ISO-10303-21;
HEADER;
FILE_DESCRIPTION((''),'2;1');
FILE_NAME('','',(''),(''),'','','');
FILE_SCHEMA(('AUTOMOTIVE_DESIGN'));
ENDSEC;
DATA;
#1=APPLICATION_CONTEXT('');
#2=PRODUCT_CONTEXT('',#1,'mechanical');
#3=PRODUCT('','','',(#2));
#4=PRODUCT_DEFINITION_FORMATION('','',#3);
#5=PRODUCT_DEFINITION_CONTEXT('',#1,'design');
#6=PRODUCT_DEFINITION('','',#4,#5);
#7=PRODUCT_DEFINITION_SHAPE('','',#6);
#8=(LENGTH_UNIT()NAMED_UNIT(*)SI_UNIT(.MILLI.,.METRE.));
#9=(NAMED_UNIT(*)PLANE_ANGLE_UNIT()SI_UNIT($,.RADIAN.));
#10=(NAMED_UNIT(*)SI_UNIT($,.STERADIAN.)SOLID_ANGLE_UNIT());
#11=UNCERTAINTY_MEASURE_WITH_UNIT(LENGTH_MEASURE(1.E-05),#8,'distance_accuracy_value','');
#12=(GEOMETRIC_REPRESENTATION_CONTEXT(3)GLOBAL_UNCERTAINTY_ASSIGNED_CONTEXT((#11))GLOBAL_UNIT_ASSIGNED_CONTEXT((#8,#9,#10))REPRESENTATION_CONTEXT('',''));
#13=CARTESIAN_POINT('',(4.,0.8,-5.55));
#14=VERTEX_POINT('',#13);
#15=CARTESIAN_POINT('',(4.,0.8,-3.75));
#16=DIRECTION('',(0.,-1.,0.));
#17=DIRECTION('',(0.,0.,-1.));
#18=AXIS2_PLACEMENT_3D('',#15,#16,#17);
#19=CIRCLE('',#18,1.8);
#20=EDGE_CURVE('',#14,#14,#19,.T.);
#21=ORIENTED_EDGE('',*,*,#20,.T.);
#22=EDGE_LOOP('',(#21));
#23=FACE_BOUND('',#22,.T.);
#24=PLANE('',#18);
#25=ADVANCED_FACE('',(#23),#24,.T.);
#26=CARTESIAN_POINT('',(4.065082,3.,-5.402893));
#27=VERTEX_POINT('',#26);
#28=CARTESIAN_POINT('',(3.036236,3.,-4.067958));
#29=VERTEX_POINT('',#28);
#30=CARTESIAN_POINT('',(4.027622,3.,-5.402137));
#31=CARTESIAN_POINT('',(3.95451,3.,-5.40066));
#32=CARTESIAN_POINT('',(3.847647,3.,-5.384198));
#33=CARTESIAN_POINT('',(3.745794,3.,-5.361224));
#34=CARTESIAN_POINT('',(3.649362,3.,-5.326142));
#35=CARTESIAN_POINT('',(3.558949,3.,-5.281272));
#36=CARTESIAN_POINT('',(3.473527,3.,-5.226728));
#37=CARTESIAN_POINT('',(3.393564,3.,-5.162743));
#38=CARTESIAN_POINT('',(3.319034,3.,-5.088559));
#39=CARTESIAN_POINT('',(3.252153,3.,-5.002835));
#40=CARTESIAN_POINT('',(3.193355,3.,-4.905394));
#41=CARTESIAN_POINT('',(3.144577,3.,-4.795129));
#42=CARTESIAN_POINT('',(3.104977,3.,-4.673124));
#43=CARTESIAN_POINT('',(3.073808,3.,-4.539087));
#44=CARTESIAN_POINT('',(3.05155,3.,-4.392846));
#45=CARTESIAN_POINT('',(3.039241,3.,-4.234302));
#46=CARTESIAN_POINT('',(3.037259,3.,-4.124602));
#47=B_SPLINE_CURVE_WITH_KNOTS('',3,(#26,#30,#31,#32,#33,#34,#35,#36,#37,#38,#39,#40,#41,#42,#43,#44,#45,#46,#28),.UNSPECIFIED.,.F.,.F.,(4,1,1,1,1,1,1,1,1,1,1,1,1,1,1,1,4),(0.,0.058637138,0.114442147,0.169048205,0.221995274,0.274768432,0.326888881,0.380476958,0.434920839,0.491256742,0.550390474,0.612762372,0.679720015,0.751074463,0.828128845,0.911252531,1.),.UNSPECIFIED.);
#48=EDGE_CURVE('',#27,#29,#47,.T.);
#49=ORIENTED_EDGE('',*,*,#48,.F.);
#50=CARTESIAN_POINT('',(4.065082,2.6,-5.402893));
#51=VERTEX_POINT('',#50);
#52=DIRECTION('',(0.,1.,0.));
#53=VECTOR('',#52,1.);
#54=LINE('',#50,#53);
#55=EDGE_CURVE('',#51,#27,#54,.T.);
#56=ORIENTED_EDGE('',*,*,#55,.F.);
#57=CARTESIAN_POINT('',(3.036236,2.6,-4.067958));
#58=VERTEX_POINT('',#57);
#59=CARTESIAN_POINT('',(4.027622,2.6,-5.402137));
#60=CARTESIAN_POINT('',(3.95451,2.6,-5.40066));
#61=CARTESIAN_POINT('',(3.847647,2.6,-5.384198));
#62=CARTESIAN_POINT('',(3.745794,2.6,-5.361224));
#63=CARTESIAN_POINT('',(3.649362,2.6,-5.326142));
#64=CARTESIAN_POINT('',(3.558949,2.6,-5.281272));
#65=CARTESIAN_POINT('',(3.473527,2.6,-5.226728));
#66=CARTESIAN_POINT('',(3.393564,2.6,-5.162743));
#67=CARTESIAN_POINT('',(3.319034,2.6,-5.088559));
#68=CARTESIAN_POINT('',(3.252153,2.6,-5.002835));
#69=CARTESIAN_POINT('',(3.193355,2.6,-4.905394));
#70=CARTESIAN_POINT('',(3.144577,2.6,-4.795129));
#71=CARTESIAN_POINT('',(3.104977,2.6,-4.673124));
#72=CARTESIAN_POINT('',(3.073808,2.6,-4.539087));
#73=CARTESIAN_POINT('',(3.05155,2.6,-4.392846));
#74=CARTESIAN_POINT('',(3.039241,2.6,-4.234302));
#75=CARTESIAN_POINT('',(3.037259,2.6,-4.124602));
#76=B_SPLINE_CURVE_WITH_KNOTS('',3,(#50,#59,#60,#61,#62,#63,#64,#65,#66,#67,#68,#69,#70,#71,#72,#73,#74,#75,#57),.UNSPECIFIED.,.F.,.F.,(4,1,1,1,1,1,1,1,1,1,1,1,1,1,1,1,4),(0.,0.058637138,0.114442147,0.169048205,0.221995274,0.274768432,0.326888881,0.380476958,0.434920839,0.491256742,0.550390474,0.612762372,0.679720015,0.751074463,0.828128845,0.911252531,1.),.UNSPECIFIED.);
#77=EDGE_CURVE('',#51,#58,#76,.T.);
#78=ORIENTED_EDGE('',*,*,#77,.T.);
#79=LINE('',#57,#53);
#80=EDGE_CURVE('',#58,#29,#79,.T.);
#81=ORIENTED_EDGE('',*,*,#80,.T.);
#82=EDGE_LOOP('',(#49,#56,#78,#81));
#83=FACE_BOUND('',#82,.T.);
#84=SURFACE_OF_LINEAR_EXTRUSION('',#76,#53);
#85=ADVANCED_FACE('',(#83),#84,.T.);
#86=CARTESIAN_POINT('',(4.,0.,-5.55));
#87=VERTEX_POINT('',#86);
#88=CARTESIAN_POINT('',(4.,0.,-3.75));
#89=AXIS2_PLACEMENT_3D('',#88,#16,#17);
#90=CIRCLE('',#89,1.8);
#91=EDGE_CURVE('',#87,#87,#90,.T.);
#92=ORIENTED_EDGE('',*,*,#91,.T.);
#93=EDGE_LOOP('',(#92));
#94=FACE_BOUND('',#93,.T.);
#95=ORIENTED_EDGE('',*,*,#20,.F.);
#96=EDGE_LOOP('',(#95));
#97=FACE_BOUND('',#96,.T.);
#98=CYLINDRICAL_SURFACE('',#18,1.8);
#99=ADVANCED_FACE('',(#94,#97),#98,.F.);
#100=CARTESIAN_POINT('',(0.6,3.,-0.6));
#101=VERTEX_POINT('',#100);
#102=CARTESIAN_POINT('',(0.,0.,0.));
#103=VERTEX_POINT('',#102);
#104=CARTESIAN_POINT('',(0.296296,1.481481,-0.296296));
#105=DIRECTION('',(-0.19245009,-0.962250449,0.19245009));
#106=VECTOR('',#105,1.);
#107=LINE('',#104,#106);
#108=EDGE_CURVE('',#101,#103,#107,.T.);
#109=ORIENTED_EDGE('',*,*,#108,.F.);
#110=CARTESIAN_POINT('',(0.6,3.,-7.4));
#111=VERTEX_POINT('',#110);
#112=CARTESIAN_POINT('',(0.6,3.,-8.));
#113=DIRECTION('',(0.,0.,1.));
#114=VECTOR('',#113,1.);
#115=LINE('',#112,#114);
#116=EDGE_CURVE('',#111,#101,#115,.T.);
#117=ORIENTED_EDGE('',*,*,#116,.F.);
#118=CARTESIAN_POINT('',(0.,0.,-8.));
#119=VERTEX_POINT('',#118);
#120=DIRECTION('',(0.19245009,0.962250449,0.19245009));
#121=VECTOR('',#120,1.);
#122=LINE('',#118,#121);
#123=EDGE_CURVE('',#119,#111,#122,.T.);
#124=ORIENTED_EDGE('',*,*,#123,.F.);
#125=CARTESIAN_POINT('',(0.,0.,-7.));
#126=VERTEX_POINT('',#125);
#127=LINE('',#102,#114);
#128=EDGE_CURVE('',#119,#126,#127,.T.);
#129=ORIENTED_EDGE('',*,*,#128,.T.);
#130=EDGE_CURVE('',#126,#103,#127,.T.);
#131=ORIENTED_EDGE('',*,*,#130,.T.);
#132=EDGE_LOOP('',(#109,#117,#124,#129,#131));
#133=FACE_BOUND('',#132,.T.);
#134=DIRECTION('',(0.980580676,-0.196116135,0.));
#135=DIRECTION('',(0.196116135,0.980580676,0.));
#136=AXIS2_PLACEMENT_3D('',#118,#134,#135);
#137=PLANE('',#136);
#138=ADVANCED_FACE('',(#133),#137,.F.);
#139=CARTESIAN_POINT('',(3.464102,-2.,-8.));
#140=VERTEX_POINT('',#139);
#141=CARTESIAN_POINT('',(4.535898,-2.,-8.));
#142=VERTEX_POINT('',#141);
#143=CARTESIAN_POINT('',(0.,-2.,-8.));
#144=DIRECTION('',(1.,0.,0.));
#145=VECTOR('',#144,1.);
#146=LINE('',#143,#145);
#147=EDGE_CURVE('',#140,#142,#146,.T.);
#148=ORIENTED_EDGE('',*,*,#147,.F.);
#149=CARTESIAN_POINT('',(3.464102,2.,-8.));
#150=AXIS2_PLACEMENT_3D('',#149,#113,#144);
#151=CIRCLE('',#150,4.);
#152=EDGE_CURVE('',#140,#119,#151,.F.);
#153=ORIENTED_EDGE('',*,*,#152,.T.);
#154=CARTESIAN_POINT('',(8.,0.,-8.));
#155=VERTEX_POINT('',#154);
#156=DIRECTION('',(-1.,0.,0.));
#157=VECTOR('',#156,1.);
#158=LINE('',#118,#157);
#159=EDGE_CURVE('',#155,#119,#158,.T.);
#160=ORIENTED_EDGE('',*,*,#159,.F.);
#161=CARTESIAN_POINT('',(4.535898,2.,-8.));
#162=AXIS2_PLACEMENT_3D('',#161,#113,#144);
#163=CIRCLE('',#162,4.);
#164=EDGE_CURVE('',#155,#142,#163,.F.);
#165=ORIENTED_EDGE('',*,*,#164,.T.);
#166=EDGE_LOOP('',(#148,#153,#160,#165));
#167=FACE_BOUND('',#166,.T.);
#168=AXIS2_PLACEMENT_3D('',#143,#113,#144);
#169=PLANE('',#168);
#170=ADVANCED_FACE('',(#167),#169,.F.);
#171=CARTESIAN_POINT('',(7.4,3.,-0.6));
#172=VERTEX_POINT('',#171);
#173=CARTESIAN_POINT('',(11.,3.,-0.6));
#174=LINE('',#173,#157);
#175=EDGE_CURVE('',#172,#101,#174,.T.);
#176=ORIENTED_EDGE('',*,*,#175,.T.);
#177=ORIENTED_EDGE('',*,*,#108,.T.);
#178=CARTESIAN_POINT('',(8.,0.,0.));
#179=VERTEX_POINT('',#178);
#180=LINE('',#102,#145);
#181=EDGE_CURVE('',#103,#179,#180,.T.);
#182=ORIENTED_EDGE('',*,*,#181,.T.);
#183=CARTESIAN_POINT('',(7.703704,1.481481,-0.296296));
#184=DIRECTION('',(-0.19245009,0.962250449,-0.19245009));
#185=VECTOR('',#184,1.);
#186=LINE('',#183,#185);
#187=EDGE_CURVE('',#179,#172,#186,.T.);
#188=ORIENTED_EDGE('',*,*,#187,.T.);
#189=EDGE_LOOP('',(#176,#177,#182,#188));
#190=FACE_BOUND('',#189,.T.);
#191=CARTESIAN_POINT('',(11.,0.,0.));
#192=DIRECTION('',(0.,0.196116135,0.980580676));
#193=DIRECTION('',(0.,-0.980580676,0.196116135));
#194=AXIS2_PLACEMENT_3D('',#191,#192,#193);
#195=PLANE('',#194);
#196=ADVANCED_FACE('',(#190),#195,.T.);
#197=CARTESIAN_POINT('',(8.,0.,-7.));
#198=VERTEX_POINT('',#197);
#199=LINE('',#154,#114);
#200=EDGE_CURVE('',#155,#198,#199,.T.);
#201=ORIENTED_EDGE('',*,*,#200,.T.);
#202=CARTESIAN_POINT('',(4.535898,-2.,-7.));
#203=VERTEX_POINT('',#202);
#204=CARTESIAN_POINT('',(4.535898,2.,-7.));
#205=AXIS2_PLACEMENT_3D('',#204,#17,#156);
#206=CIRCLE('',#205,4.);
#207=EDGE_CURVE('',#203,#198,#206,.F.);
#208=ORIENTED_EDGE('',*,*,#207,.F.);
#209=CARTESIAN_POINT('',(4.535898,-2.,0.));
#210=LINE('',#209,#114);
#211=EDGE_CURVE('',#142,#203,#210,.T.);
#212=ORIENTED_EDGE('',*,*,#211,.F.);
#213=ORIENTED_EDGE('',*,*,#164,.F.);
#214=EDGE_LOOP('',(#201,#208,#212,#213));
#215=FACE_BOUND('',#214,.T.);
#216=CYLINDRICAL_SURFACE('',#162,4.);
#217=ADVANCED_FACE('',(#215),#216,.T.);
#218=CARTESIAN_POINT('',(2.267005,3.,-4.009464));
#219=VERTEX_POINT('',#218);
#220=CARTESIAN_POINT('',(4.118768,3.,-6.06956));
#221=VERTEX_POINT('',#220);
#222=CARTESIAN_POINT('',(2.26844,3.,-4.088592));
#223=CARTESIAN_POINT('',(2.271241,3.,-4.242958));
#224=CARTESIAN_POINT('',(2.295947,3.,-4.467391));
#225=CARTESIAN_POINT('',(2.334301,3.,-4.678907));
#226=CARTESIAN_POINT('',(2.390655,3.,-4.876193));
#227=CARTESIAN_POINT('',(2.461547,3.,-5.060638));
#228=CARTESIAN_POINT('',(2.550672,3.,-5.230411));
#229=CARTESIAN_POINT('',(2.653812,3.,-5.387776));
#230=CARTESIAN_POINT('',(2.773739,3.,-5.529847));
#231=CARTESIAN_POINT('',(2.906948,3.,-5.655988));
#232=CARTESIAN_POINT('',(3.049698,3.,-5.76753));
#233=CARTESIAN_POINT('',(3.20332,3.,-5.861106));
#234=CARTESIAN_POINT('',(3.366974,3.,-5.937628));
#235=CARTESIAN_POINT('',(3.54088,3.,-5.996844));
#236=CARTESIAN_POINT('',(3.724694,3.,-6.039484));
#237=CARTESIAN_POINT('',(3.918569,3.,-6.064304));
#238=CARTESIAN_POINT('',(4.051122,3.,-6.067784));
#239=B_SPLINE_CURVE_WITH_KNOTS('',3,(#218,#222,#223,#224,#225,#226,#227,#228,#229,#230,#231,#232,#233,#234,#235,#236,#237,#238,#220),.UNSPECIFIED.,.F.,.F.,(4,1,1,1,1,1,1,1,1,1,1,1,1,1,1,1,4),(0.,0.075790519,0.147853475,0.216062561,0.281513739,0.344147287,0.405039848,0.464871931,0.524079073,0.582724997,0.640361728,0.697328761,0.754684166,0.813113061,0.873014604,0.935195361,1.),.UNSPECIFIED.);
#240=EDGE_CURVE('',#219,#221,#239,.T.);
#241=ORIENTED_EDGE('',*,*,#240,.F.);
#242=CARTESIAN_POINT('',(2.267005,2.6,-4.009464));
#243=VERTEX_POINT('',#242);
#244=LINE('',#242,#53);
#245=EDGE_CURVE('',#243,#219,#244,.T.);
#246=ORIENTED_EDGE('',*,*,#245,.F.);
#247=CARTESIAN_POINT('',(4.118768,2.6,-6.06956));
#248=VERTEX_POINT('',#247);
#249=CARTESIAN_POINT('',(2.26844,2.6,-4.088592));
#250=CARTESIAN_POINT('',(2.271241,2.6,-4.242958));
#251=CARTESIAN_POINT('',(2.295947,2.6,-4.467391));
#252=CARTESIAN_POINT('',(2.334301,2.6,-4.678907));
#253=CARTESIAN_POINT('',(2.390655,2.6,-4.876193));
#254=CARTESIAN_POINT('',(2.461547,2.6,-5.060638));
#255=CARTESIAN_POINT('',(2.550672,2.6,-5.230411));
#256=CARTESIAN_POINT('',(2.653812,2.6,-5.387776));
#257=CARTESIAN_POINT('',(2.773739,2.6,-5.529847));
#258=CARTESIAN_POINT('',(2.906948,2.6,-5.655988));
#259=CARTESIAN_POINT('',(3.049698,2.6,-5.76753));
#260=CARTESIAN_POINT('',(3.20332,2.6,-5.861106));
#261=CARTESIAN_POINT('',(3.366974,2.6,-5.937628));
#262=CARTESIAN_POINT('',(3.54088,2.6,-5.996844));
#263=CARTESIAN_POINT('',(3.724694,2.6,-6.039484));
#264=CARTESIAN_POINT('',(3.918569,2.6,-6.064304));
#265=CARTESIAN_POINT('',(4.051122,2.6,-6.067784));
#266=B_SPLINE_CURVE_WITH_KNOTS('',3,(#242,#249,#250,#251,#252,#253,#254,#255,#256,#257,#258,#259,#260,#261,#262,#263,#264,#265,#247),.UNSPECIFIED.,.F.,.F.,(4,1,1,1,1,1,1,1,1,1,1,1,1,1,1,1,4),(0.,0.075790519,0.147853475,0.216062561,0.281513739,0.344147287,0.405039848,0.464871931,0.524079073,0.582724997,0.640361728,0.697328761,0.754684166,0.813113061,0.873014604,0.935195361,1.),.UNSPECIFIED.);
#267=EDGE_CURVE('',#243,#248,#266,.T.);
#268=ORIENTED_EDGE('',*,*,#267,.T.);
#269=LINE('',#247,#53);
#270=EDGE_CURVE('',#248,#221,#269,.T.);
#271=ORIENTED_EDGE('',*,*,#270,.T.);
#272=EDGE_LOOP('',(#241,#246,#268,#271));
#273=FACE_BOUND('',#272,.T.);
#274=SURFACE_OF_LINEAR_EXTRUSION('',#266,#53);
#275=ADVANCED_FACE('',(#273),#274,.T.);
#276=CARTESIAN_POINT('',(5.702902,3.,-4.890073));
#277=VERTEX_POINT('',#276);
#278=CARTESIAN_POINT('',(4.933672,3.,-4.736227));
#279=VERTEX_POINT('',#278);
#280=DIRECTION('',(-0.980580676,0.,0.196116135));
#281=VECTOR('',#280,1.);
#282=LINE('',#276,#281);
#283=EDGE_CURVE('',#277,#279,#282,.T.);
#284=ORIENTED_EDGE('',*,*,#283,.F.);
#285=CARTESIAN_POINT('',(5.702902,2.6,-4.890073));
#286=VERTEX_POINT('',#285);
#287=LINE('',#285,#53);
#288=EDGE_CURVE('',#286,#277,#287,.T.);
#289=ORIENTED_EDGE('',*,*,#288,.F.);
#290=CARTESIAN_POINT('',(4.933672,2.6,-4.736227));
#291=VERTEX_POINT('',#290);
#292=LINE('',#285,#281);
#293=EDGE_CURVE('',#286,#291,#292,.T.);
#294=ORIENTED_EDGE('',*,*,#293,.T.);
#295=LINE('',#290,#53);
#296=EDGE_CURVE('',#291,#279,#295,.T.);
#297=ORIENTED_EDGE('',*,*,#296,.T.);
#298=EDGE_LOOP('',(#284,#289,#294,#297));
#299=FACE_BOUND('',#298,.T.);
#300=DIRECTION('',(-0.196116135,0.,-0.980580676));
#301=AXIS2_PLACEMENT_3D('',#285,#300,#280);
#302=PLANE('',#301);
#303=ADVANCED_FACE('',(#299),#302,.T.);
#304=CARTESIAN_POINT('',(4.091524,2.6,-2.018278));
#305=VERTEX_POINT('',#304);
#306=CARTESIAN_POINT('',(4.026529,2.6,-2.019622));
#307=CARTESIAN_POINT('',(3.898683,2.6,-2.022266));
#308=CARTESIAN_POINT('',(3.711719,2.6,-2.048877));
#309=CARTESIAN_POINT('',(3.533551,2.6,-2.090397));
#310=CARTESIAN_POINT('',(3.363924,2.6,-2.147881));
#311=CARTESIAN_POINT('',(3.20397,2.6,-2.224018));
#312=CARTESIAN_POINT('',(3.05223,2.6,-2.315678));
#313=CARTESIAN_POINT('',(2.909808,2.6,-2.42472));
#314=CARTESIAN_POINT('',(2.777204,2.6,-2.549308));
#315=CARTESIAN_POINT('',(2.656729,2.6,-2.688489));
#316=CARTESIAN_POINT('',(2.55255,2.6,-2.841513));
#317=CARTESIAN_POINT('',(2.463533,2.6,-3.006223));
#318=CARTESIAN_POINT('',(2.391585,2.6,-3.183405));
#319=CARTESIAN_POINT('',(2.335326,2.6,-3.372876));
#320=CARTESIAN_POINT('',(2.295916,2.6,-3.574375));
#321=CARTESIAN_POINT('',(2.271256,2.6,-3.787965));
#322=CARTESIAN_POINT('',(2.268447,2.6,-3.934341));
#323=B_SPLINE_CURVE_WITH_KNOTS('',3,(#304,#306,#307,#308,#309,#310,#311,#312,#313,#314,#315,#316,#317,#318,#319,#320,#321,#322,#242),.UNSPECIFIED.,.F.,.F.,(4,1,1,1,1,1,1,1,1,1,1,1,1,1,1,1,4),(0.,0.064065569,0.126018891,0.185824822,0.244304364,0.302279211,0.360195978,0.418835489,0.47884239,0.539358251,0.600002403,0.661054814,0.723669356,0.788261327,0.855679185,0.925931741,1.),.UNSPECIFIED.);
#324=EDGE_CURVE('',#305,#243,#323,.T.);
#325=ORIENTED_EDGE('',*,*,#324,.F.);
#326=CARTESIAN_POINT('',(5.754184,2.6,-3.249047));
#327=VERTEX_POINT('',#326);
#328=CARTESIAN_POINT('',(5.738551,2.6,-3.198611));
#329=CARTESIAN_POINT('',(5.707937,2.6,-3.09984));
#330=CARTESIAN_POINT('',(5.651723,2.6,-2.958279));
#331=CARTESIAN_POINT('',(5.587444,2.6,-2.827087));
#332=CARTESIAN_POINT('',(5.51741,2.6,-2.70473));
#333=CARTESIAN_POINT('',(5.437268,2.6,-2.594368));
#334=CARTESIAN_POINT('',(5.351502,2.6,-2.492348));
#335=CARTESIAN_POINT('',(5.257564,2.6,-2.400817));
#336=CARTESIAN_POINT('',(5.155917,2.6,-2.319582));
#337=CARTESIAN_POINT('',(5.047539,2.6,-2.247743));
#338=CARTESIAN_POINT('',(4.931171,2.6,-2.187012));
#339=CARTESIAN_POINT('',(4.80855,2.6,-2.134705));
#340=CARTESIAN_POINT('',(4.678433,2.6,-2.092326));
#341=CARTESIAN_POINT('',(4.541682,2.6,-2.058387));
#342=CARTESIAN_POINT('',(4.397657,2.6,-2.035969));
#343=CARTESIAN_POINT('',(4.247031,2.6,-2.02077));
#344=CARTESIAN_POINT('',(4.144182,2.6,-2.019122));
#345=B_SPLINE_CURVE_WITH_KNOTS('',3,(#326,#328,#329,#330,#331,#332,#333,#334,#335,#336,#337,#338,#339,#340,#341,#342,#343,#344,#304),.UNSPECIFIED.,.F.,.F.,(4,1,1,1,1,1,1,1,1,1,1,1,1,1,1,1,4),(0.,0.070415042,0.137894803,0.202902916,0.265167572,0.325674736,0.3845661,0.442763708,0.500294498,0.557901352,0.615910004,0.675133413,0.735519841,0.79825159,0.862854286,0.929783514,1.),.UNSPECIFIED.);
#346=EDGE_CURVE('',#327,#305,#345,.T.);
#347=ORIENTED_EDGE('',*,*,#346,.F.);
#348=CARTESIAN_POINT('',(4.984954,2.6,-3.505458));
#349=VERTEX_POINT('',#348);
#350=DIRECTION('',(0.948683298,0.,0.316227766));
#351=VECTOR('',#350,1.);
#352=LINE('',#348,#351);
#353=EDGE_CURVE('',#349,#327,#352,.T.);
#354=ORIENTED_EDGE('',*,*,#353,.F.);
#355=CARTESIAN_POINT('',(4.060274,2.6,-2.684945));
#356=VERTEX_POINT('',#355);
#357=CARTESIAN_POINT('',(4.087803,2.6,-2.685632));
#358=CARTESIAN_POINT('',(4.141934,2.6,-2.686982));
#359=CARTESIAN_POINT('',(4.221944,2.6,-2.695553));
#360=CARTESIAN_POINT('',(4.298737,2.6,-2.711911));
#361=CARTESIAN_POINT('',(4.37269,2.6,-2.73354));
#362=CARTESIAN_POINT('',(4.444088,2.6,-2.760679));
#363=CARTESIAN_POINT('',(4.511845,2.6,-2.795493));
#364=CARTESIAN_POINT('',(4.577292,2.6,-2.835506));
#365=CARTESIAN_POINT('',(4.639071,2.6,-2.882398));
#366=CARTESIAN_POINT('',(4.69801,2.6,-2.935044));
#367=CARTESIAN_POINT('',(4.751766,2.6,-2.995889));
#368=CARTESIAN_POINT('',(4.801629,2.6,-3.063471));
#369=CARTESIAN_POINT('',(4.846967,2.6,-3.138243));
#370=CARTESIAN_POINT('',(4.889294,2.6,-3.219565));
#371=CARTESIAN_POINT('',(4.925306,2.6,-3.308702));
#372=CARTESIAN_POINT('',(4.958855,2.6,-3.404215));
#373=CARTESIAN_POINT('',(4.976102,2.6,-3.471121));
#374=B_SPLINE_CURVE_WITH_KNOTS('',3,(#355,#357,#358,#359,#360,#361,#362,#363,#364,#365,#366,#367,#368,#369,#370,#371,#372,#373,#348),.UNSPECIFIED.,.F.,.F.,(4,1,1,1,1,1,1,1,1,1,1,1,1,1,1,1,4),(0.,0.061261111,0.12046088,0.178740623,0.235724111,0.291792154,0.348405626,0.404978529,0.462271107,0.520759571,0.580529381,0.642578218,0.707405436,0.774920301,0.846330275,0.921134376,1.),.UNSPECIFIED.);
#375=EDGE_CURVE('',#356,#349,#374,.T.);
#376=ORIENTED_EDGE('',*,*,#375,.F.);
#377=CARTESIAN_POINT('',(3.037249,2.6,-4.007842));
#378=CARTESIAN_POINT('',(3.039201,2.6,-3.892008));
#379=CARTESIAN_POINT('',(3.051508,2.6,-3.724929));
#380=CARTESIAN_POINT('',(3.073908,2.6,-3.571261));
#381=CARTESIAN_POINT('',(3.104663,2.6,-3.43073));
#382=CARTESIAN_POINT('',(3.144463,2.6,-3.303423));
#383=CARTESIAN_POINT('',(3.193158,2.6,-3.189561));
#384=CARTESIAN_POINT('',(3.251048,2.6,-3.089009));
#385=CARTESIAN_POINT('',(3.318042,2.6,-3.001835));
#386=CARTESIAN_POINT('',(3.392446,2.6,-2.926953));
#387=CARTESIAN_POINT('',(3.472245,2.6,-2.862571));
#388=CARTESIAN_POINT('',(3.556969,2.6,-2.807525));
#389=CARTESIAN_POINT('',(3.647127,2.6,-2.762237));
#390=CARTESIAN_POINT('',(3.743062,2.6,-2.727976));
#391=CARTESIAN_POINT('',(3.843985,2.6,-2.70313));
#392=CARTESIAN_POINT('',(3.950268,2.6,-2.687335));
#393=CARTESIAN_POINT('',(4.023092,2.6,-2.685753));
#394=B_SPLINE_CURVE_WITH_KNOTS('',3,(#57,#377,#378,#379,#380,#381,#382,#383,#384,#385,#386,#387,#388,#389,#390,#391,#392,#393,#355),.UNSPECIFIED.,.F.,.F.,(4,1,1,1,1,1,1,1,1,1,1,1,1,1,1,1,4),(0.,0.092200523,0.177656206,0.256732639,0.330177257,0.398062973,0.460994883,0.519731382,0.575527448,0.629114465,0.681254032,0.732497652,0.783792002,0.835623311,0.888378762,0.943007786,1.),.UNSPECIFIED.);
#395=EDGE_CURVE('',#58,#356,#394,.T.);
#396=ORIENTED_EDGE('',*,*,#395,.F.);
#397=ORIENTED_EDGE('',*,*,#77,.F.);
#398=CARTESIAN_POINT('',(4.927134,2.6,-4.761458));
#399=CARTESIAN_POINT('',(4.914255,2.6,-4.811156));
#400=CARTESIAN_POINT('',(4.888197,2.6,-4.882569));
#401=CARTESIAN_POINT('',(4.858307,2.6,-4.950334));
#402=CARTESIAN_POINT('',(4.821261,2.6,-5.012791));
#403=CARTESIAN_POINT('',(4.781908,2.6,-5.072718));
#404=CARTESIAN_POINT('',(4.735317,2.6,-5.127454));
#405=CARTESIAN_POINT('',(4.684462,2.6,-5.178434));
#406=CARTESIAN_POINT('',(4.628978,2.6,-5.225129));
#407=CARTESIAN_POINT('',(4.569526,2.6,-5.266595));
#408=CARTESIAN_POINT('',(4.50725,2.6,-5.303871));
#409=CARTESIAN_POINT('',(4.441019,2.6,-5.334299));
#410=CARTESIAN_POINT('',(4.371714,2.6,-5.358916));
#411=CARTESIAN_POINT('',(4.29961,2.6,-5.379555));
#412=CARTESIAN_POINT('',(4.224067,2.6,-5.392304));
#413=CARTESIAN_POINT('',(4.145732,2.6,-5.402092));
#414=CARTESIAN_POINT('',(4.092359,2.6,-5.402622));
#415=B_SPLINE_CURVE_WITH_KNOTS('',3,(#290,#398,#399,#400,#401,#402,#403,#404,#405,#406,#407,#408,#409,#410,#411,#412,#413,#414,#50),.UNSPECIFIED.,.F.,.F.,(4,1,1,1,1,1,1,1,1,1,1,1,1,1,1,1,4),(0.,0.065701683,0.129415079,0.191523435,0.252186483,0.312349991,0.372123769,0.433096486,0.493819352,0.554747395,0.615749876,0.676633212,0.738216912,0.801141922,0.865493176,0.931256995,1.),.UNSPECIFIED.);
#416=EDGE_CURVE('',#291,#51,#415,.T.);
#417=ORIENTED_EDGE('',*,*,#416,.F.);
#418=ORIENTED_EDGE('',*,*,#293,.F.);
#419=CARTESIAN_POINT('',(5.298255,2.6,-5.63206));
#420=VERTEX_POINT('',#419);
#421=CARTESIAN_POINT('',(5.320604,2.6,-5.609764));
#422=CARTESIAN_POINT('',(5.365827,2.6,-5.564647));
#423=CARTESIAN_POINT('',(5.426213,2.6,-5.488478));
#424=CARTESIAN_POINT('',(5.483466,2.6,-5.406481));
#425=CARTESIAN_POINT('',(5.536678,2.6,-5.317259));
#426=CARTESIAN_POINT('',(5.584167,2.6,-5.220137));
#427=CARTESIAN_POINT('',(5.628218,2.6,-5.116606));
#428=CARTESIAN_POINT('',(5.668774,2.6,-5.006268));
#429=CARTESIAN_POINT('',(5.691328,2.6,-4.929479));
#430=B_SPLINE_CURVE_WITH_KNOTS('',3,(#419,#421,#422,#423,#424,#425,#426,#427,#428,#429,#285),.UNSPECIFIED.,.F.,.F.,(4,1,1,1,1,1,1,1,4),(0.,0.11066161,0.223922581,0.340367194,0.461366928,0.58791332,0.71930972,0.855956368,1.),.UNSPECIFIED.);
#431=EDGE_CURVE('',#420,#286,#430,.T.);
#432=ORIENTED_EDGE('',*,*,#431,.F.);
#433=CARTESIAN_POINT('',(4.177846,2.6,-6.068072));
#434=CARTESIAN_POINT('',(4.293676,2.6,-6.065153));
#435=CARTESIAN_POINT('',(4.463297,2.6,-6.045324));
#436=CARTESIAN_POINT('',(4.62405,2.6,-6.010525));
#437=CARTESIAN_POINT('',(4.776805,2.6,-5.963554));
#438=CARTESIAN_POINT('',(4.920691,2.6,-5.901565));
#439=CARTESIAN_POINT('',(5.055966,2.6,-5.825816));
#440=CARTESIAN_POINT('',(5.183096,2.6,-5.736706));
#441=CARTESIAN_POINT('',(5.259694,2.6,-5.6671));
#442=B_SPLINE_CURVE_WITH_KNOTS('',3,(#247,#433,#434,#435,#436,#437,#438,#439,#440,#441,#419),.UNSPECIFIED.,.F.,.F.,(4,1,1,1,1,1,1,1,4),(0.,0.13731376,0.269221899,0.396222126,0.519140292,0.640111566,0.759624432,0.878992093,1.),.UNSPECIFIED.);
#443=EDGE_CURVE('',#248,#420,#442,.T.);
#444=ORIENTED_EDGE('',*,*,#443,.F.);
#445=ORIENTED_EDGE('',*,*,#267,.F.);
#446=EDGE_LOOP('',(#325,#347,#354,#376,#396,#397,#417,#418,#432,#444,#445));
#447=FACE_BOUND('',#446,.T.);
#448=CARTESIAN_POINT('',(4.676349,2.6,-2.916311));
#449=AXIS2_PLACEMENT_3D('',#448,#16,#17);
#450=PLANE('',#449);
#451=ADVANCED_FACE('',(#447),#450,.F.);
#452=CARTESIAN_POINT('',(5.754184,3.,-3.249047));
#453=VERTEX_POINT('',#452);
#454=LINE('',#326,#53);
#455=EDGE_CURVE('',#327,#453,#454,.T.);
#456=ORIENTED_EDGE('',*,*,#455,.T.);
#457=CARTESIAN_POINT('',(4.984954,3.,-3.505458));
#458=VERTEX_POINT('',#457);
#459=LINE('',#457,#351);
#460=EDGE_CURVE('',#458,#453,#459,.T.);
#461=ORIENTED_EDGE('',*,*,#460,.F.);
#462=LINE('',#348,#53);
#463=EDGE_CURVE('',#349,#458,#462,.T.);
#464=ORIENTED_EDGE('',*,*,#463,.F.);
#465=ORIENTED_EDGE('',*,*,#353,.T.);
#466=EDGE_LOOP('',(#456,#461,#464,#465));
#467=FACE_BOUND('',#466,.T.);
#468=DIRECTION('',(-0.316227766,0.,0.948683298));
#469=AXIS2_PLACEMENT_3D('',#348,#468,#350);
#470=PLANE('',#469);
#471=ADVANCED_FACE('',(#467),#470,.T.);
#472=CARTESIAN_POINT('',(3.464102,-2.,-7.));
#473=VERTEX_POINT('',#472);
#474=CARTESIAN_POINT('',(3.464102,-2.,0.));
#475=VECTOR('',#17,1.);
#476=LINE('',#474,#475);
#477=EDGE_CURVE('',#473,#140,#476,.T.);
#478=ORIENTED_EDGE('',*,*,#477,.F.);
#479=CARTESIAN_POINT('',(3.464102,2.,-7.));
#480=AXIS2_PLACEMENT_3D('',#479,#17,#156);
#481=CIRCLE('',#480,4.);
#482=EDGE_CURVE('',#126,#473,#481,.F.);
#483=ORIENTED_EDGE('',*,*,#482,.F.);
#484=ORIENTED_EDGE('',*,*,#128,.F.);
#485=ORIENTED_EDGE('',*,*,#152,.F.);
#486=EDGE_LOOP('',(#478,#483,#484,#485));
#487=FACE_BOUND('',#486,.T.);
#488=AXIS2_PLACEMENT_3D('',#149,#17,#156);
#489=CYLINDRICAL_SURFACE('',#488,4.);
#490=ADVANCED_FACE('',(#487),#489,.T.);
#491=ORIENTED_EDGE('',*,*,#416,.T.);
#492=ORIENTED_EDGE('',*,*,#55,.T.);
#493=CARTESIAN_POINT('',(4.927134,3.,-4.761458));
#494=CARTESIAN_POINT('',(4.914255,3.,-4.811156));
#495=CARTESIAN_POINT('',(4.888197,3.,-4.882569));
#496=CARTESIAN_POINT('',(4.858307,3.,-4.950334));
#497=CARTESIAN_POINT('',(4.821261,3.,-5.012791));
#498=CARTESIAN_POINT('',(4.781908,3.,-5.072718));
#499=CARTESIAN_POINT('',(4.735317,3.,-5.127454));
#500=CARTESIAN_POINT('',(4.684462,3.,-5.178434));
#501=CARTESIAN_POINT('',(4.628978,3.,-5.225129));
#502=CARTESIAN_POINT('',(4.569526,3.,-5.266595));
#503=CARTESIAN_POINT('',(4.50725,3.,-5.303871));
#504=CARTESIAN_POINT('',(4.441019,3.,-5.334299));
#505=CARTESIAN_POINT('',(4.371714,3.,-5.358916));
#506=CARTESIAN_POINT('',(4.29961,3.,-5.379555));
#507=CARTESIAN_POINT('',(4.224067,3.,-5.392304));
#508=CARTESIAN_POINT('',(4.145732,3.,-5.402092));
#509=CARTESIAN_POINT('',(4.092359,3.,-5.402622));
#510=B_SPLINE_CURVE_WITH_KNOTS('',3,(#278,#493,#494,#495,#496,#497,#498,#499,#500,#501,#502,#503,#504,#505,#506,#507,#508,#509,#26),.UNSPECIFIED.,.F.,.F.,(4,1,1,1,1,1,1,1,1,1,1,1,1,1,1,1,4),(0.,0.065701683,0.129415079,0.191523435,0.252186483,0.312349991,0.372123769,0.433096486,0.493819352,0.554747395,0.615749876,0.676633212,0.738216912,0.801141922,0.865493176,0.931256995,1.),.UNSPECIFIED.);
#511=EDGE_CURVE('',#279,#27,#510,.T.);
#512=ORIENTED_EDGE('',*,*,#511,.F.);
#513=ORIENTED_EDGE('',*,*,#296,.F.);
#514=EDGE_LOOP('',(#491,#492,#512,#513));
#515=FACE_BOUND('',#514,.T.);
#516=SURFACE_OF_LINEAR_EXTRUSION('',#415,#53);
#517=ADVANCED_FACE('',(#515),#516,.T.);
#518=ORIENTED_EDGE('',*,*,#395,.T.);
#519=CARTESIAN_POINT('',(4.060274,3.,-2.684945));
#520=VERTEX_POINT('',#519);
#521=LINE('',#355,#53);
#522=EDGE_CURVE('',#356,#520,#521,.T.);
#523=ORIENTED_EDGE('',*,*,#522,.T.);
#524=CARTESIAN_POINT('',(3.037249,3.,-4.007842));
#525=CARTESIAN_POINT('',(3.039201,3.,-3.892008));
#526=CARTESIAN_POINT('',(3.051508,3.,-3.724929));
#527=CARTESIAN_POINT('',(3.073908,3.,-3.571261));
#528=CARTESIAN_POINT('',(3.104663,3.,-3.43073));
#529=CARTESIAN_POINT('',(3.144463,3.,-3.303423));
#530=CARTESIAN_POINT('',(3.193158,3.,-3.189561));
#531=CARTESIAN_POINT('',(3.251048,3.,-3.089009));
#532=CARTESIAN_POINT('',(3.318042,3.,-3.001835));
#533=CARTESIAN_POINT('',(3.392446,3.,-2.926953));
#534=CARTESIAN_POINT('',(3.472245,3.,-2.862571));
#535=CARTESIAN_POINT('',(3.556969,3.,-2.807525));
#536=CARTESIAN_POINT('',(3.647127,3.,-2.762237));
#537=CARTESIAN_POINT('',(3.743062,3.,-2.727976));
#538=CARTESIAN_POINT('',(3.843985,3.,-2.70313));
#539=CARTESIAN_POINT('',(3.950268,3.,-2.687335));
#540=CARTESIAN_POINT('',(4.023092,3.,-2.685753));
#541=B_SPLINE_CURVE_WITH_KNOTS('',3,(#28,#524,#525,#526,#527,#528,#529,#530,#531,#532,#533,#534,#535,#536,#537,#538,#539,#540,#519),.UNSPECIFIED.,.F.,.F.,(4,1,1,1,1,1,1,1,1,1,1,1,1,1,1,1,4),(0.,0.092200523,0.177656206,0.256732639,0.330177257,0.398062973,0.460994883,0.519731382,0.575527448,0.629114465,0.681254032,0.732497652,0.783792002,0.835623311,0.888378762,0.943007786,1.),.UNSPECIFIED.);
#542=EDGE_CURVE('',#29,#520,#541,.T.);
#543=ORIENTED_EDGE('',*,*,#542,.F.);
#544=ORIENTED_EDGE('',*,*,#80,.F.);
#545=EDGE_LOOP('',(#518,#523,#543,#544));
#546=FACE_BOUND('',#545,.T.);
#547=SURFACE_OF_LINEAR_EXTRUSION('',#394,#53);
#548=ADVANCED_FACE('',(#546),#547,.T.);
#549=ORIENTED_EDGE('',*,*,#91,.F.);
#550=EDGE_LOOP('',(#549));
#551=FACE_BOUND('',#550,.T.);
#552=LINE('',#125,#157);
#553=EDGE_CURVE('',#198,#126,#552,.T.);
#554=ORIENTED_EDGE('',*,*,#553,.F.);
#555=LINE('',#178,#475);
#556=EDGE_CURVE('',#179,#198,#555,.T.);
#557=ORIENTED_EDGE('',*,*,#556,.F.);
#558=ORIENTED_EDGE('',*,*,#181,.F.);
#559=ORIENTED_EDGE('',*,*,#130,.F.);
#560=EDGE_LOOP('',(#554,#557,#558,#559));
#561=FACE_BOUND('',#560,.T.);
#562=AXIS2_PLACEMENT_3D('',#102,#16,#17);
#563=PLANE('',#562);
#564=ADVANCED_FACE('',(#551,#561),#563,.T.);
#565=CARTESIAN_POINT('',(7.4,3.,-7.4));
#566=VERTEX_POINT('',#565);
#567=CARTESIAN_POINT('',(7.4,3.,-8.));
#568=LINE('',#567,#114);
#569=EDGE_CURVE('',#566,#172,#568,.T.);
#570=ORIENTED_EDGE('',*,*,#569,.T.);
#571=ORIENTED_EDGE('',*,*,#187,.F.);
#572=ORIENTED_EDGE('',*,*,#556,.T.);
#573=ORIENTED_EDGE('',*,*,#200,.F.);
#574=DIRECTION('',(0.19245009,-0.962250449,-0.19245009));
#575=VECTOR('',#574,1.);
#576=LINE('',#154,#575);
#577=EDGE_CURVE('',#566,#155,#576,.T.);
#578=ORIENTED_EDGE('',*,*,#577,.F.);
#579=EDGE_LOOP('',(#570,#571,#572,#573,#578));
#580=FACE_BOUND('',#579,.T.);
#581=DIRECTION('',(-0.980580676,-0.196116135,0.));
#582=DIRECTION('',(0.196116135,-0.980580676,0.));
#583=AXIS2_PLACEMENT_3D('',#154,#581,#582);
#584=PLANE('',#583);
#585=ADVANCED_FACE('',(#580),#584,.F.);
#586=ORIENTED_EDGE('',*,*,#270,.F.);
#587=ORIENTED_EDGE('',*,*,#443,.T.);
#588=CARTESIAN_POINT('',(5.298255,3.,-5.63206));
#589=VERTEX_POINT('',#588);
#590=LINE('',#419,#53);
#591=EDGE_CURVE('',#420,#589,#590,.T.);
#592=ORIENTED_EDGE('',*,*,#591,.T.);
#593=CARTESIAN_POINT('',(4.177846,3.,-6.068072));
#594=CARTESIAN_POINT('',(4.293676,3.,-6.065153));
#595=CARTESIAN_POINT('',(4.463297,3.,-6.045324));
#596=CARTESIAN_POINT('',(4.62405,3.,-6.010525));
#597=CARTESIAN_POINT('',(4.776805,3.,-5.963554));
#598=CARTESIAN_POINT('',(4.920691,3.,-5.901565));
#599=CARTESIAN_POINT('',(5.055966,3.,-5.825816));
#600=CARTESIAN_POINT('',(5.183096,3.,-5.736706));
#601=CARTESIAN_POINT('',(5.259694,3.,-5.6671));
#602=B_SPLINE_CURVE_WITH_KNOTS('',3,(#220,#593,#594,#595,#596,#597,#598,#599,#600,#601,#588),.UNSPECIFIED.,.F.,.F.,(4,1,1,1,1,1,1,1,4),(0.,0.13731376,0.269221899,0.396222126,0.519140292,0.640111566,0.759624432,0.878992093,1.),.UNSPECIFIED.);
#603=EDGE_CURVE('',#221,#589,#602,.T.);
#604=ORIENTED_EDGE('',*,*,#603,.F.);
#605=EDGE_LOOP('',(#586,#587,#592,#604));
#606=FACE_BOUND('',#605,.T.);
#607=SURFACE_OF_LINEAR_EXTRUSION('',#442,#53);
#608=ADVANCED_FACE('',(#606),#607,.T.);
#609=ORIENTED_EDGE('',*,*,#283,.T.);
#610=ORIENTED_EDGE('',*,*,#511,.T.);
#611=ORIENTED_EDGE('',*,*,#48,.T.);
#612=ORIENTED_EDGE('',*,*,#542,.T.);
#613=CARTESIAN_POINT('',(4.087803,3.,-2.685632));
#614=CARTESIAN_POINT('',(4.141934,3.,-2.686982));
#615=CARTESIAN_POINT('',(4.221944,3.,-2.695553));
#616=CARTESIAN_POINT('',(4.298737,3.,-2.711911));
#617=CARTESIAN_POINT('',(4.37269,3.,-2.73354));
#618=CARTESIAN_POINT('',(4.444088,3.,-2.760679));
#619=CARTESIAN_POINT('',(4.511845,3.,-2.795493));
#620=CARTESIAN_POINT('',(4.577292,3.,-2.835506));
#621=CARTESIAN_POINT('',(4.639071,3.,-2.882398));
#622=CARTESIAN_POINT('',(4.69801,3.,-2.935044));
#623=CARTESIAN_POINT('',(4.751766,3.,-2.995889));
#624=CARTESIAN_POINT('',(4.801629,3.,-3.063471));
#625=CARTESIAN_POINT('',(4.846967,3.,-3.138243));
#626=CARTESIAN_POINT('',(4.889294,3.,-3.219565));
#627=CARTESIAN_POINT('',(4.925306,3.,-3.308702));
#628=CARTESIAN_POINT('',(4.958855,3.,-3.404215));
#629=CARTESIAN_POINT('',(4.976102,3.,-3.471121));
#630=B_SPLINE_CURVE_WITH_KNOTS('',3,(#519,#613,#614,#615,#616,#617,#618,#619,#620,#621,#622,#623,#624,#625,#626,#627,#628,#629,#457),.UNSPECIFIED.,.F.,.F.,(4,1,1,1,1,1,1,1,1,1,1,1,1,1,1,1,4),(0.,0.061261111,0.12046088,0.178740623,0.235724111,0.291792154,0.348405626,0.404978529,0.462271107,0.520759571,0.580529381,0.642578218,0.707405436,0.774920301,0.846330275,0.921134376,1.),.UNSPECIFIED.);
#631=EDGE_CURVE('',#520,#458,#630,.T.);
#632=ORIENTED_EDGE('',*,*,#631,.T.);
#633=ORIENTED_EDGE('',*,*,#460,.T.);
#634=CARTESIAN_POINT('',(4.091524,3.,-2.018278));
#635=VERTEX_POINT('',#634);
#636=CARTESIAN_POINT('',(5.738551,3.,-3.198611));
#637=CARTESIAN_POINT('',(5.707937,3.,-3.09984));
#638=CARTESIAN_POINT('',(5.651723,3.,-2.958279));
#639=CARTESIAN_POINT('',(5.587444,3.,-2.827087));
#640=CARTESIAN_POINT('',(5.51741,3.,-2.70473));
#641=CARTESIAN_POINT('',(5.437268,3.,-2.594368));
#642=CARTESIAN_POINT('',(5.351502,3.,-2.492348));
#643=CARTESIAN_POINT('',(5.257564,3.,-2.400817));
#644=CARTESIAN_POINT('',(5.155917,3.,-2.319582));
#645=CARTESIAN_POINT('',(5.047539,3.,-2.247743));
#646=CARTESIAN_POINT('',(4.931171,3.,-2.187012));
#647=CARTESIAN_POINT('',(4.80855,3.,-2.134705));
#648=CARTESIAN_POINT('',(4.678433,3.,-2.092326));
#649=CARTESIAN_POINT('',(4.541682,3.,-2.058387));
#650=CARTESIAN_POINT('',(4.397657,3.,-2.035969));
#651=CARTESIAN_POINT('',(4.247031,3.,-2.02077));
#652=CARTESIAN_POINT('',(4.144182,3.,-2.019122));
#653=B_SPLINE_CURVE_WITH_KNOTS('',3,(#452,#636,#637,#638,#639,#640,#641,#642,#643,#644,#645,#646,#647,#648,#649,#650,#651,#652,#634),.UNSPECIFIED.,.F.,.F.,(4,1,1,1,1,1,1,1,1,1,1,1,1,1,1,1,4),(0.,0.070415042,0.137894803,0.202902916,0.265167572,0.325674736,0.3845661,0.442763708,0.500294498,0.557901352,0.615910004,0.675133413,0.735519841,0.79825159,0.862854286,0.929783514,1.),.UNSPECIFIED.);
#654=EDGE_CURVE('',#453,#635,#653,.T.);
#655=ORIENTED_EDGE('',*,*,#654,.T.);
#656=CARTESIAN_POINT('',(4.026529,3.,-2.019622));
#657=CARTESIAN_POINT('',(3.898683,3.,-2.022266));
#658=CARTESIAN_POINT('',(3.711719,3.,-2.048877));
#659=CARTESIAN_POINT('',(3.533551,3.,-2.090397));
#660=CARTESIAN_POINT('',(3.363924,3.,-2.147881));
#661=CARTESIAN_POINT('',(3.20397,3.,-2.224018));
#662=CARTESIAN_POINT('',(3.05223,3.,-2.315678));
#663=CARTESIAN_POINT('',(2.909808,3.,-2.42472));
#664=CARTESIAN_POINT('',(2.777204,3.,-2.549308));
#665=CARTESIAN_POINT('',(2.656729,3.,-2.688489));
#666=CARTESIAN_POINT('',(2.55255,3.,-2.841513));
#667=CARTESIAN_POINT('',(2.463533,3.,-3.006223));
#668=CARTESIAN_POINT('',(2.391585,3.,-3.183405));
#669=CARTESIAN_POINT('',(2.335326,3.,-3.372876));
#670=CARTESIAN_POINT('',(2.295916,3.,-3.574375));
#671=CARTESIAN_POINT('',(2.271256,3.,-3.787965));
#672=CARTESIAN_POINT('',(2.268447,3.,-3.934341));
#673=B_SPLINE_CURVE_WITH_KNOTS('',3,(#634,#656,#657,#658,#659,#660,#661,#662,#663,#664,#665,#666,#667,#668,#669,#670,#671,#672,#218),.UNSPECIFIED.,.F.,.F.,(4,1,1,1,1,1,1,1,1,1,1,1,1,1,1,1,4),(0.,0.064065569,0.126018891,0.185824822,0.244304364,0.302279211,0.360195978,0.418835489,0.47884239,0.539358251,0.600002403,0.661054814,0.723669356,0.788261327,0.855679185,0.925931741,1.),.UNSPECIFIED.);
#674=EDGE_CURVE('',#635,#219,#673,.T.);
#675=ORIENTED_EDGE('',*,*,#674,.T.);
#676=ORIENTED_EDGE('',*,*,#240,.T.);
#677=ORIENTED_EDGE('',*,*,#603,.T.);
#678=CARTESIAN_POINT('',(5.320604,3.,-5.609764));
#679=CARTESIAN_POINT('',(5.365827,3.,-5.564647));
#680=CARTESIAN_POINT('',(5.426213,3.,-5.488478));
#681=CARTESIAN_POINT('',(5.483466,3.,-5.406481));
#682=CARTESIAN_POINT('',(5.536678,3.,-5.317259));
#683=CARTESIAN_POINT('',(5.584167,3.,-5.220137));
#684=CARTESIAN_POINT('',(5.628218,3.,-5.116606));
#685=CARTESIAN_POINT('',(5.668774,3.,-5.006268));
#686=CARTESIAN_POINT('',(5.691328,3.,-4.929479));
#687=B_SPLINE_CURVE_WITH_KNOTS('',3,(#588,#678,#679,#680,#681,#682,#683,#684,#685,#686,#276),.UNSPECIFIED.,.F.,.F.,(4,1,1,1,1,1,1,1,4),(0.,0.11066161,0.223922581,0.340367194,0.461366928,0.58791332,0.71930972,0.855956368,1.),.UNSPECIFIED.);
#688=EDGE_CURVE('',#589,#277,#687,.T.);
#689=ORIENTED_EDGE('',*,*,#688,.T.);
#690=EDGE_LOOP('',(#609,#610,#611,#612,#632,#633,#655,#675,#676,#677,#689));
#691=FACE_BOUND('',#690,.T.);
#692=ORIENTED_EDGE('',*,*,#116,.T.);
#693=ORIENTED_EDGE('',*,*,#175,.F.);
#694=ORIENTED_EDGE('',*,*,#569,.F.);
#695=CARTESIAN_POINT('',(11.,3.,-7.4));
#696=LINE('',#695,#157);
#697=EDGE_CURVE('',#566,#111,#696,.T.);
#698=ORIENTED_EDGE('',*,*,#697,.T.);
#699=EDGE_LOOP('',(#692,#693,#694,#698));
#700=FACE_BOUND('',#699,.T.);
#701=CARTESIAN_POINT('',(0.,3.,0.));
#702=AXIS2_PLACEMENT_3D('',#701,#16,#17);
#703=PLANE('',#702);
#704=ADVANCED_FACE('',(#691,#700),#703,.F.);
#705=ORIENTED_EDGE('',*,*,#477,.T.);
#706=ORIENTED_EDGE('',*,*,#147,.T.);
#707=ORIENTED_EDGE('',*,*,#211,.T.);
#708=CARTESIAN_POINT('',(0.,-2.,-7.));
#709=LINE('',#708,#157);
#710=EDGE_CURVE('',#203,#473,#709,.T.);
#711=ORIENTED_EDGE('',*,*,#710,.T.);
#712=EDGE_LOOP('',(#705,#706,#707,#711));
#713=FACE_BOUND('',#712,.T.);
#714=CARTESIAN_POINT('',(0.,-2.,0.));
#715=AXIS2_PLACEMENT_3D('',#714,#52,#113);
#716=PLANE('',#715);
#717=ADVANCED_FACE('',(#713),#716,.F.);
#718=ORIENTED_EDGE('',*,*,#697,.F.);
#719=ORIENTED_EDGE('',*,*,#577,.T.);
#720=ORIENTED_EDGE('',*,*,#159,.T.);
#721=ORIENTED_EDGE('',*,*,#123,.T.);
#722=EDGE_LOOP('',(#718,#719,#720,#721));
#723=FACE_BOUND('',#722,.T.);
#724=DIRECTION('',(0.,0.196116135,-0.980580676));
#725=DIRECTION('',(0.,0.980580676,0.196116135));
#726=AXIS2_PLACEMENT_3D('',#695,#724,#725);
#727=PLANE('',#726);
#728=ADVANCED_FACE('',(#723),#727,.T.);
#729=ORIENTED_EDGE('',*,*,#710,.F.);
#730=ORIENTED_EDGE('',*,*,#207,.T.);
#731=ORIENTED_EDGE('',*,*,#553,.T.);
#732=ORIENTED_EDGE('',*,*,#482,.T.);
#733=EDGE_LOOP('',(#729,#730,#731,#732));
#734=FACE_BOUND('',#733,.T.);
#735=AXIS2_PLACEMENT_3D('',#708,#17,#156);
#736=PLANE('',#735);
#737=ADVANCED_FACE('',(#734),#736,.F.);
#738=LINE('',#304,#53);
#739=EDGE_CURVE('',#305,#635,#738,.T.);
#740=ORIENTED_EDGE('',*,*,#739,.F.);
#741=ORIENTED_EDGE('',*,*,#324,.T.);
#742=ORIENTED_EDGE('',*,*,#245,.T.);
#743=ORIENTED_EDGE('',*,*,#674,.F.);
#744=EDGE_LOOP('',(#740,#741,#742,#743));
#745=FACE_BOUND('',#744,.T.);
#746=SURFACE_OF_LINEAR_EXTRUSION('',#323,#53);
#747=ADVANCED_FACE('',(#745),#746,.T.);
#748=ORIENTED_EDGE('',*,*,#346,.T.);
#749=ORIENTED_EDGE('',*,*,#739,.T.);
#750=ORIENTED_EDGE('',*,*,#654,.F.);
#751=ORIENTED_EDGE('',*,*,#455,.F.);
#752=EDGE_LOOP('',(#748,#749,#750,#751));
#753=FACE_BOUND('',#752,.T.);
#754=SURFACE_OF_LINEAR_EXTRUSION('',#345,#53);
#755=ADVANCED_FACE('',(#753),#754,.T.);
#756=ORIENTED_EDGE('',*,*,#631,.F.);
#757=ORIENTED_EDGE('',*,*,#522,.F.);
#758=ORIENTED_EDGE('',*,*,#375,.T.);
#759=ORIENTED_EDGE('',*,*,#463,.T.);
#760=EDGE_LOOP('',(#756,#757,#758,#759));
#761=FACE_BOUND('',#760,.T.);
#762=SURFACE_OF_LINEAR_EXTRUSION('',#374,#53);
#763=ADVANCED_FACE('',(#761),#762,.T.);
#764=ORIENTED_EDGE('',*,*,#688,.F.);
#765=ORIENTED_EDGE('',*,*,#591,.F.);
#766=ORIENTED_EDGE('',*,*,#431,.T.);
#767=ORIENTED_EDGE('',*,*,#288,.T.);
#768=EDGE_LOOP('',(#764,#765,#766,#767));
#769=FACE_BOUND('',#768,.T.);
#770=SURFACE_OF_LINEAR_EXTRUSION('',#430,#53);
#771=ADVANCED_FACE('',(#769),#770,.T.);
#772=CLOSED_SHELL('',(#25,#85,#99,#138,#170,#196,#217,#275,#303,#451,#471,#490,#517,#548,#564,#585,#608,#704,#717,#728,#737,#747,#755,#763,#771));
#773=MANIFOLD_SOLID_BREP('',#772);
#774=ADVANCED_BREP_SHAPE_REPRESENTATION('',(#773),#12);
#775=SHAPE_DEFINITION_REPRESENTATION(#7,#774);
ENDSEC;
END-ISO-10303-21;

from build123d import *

# Parameters (mm, degrees)
SKETCH1_W               = 8
SKETCH1_H               = 8
BOSS_EXTRUDE1_DEPTH     = 3
CUT_EXTRUDE1_DEPTH      = 12.704699911
CUT_EXTRUDE1_DEPTH_BACK = 12.704699911
CUT_EXTRUDE2_DEPTH      = 11
SKETCH4_R               = 1.8
CUT_EXTRUDE3_DEPTH      = 0.8
SKETCH5_W               = 8
SKETCH5_H               = 1
BOSS_EXTRUDE2_DEPTH     = 2
FILLET1_R               = 4
CUT_EXTRUDE4_DEPTH      = 0.4


with BuildPart() as part:
    # Sketch1 → Boss-Extrude1 (new body)
    with BuildSketch(Plane(origin=(0, 0, 0), x_dir=(1, 0, 0), z_dir=(0, 1, 0))):
        with Locations((4, 4)):
            Rectangle(SKETCH1_W, SKETCH1_H)
    extrude(amount=BOSS_EXTRUDE1_DEPTH)

    # Sketch2 → Cut-Extrude1 (cut, two sides: drawn at the far end of the back side and taken through both)
    with BuildSketch(Plane.XY.offset(-CUT_EXTRUDE1_DEPTH_BACK)):
        Polygon((0, 0), (0.6, 3), (0, 3), align=None)
        Polygon((8, 0), (7.4, 3), (8, 3), align=None)
    extrude(amount=CUT_EXTRUDE1_DEPTH + CUT_EXTRUDE1_DEPTH_BACK, mode=Mode.SUBTRACT)

    # Sketch3 → Cut-Extrude2 (cut)
    with BuildSketch(Plane(origin=(0, 0, 0), x_dir=(0, 0, -1), z_dir=(1, 0, 0))):
        Polygon((0, 0), (0.6, 3), (0, 3), align=None)
        Polygon((8, 3), (7.4, 3), (8, 0), align=None)
    extrude(amount=CUT_EXTRUDE2_DEPTH, mode=Mode.SUBTRACT)

    # Sketch4 → Cut-Extrude3 (cut)
    with BuildSketch(Plane.XZ):
        with Locations(Location((4, -3.75, 0), (0, 0, 270))):
            Circle(SKETCH4_R)
    extrude(amount=-CUT_EXTRUDE3_DEPTH, mode=Mode.SUBTRACT)

    # Sketch5 → Boss-Extrude2 (add)
    with BuildSketch(Plane.XZ):
        with Locations((4, -7.5)):
            Rectangle(SKETCH5_W, SKETCH5_H)
    extrude(amount=BOSS_EXTRUDE2_DEPTH)

    # Fillet1
    # the kernel refuses this fillet: 4 mm, written as the material it takes off along each edge
    with BuildSketch(Plane(origin=(8, -2, -16.660254038), x_dir=(0, 1, 0), z_dir=(0, 0, 1)), Plane(origin=(0, -2, 1.660254038), x_dir=(0, 1, 0), z_dir=(0, 0, -1))) as fillet1_piece_1:
        with BuildLine():
            CenterArc((4, 3.464101615), FILLET1_R, 180, 60)
            Line((0, 3.464101615), (-0.08, 3.464101615))
            Line((-0.08, 3.464101615), (-0.08, 0))
            Line((-0.08, 0), (0, -0.08))
            ThreePointArc((0, -0.08), (1, -0.08), (1.96, -0.069282032))
            Line((1.96, -0.069282032), (2, 0))
        make_face()
    extrude(amount=18.320508076, mode=Mode.SUBTRACT)

    # Sketch6 → Cut-Extrude4 (cut)
    with BuildSketch(Plane(origin=(0, 3, 0), x_dir=(1, 0, 0), z_dir=(0, 1, 0))):
        with BuildLine():
            Line((4.984953699, 3.505457585), (5.754184468, 3.249047329))
            add(Edge.make_bspline(
                [(5.754184468, 3.249047329), (5.738551331, 3.198610805), (5.707936732, 3.099840225), (5.651723194, 2.958278532), (5.587443886, 2.827086856), (5.517410433, 2.704729688), (5.437267593, 2.594367909), (5.351502188, 2.492347505), (5.25756407, 2.400817223), (5.155916755, 2.319581611), (5.047538657, 2.247743191), (4.931170847, 2.187011676), (4.808549951, 2.134705195), (4.678432524, 2.092325917), (4.541682112, 2.058386549), (4.397657073, 2.035969411), (4.247031142, 2.020769852), (4.144181592, 2.01912185), (4.091524212, 2.018278098)],
                knots=[0, 0, 0, 0, 1.126640671, 2.206316847, 3.246446654, 4.24268115, 5.210795778, 6.153057602, 7.084219323, 8.004711971, 8.926421631, 9.854560063, 10.802134612, 11.768317461, 12.772025444, 13.805668576, 14.876536225, 16, 16, 16, 16], degree=3))
            add(Edge.make_bspline(
                [(4.091524212, 2.018278098), (4.026529436, 2.019622049), (3.898682769, 2.022265641), (3.711719127, 2.048877042), (3.533551231, 2.090397174), (3.363924198, 2.147881075), (3.203970267, 2.224018355), (3.052230113, 2.31567777), (2.909808045, 2.424720155), (2.777203704, 2.549307725), (2.656729454, 2.688489389), (2.552550394, 2.841513049), (2.46353299, 3.006222974), (2.391584534, 3.18340452), (2.335325697, 3.372875751), (2.295916265, 3.574374695), (2.271256348, 3.787964822), (2.268446864, 3.934340923), (2.267004981, 4.009463995)],
                knots=[0, 0, 0, 0, 1.025049111, 2.016302254, 2.973197159, 3.90886983, 4.83646737, 5.763135642, 6.70136783, 7.661478232, 8.629732022, 9.600038443, 10.576877021, 11.5787097, 12.612181225, 13.690866959, 14.814907849, 16, 16, 16, 16], degree=3))
            add(Edge.make_bspline(
                [(2.267004981, 4.009463995), (2.268440364, 4.088592426), (2.271240535, 4.242957555), (2.295946649, 4.467391238), (2.33430142, 4.6789069), (2.390655342, 4.87619306), (2.461546504, 5.060638151), (2.550671985, 5.230411199), (2.653811862, 5.387775744), (2.773739341, 5.529847487), (2.90694801, 5.655987983), (3.049697575, 5.767530284), (3.203319761, 5.861106277), (3.366973913, 5.937627827), (3.540879519, 5.996843969), (3.724694381, 6.039484239), (3.918568892, 6.064303618), (4.051121857, 6.067784001), (4.118767802, 6.069560149)],
                knots=[0, 0, 0, 0, 1.212648312, 2.365655595, 3.457000981, 4.504219827, 5.506356588, 6.480637568, 7.437950897, 8.385265166, 9.323599949, 10.245787653, 11.157260172, 12.074946661, 13.00980897, 13.968233668, 14.963125779, 16, 16, 16, 16], degree=3))
            add(Edge.make_bspline(
                [(4.118767802, 6.069560149), (4.177845619, 6.068071541), (4.293675542, 6.065152928), (4.463296702, 6.045323759), (4.624050093, 6.010524892), (4.776804639, 5.963554159), (4.920690778, 5.901565287), (5.05596628, 5.825815524), (5.18309612, 5.736705664), (5.259694467, 5.667100309), (5.298254981, 5.632060149)],
                knots=[0, 0, 0, 0, 1.098510076, 2.153775193, 3.169777012, 4.153122333, 5.120892526, 6.076995459, 7.031936742, 8, 8, 8, 8], degree=3))
            add(Edge.make_bspline(
                [(5.298254981, 5.632060149), (5.320604149, 5.60976374), (5.365827451, 5.564647194), (5.426213252, 5.488477681), (5.483466493, 5.406481188), (5.536678451, 5.317258958), (5.58416733, 5.220136739), (5.628218337, 5.11660602), (5.668774447, 5.006267724), (5.691328308, 4.929479087), (5.702902417, 4.89007297)],
                knots=[0, 0, 0, 0, 0.885292881, 1.791380647, 2.722937556, 3.69093542, 4.703306561, 5.754477758, 6.847650944, 8, 8, 8, 8], degree=3))
            Line((5.702902417, 4.89007297), (4.933671648, 4.736226816))
            add(Edge.make_bspline(
                [(4.933671648, 4.736226816), (4.927133502, 4.76145763), (4.914255072, 4.811155713), (4.888197319, 4.88256913), (4.858307022, 4.950334085), (4.821260737, 5.012790777), (4.781908002, 5.072717729), (4.735316585, 5.127453998), (4.684461977, 5.178434101), (4.62897783, 5.22512899), (4.569525593, 5.266595122), (4.507249934, 5.303870591), (4.441018967, 5.334299022), (4.371713727, 5.358915551), (4.29961025, 5.379554656), (4.224066596, 5.392304393), (4.145731594, 5.40209207), (4.092359182, 5.40262243), (4.065081904, 5.402893482)],
                knots=[0, 0, 0, 0, 1.051226935, 2.070641259, 3.064374968, 4.034983734, 4.997599858, 5.953980297, 6.92954377, 7.901109626, 8.875958313, 9.851998019, 10.826131395, 11.811470594, 12.818270757, 13.847890818, 14.900111925, 16, 16, 16, 16], degree=3))
            add(Edge.make_bspline(
                [(4.065081904, 5.402893482), (4.027621622, 5.402136956), (3.95451036, 5.400660441), (3.84764705, 5.384198307), (3.745794169, 5.361223694), (3.649362485, 5.32614158), (3.558949174, 5.281271846), (3.473526684, 5.226727667), (3.393563858, 5.162742669), (3.319033671, 5.088558841), (3.252152959, 5.002834902), (3.193355266, 4.905393862), (3.144577309, 4.795129453), (3.104977365, 4.673123713), (3.073807698, 4.539086512), (3.051550102, 4.39284594), (3.039240982, 4.234301954), (3.037259111, 4.124602201), (3.03623575, 4.067957585)],
                knots=[0, 0, 0, 0, 0.938194206, 1.831074359, 2.704771284, 3.551924377, 4.396294915, 5.230222094, 6.087631332, 6.958733431, 7.860107878, 8.806247581, 9.804197948, 10.875520245, 12.017191412, 13.250061517, 14.580040491, 16, 16, 16, 16], degree=3))
            add(Edge.make_bspline(
                [(3.03623575, 4.067957585), (3.037249034, 4.007841988), (3.039201475, 3.892008492), (3.051507983, 3.724929387), (3.073907907, 3.571260811), (3.104663329, 3.430730056), (3.144462832, 3.303423199), (3.1931583, 3.189560541), (3.251047919, 3.089008738), (3.318041624, 3.001834743), (3.3924457, 2.926952551), (3.472244969, 2.862570915), (3.55696863, 2.80752487), (3.647126515, 2.762236533), (3.743061533, 2.72797641), (3.843985242, 2.703130369), (3.950267946, 2.687335345), (4.023091528, 2.685752793), (4.060274212, 2.684944765)],
                knots=[0, 0, 0, 0, 1.475208372, 2.842499301, 4.107722225, 5.282836115, 6.369007568, 7.375918121, 8.315702116, 9.208439171, 10.065831443, 10.90006451, 11.71996243, 12.54067204, 13.369972975, 14.214060185, 15.088124569, 16, 16, 16, 16], degree=3))
            add(Edge.make_bspline(
                [(4.060274212, 2.684944765), (4.087802914, 2.685631562), (4.141934021, 2.686982048), (4.22194397, 2.695553476), (4.298737204, 2.711910812), (4.3726896, 2.733540427), (4.444088489, 2.760679214), (4.511844803, 2.795492821), (4.577291618, 2.835505891), (4.639070965, 2.882398144), (4.6980101, 2.93504365), (4.751766089, 2.995888735), (4.801629231, 3.063471428), (4.846966938, 3.138243387), (4.889294086, 3.219564589), (4.92530624, 3.308702064), (4.958854788, 3.404215308), (4.976102112, 3.471120718), (4.984953699, 3.505457585)],
                knots=[0, 0, 0, 0, 0.980177776, 1.927374078, 2.859849964, 3.771585772, 4.668674471, 5.574490016, 6.479656464, 7.396337719, 8.332153134, 9.288470092, 10.28125149, 11.318486971, 12.398724812, 13.541284404, 14.738150009, 16, 16, 16, 16], degree=3))
        make_face()
    extrude(amount=-CUT_EXTRUDE4_DEPTH, mode=Mode.SUBTRACT)


solid = part.part
